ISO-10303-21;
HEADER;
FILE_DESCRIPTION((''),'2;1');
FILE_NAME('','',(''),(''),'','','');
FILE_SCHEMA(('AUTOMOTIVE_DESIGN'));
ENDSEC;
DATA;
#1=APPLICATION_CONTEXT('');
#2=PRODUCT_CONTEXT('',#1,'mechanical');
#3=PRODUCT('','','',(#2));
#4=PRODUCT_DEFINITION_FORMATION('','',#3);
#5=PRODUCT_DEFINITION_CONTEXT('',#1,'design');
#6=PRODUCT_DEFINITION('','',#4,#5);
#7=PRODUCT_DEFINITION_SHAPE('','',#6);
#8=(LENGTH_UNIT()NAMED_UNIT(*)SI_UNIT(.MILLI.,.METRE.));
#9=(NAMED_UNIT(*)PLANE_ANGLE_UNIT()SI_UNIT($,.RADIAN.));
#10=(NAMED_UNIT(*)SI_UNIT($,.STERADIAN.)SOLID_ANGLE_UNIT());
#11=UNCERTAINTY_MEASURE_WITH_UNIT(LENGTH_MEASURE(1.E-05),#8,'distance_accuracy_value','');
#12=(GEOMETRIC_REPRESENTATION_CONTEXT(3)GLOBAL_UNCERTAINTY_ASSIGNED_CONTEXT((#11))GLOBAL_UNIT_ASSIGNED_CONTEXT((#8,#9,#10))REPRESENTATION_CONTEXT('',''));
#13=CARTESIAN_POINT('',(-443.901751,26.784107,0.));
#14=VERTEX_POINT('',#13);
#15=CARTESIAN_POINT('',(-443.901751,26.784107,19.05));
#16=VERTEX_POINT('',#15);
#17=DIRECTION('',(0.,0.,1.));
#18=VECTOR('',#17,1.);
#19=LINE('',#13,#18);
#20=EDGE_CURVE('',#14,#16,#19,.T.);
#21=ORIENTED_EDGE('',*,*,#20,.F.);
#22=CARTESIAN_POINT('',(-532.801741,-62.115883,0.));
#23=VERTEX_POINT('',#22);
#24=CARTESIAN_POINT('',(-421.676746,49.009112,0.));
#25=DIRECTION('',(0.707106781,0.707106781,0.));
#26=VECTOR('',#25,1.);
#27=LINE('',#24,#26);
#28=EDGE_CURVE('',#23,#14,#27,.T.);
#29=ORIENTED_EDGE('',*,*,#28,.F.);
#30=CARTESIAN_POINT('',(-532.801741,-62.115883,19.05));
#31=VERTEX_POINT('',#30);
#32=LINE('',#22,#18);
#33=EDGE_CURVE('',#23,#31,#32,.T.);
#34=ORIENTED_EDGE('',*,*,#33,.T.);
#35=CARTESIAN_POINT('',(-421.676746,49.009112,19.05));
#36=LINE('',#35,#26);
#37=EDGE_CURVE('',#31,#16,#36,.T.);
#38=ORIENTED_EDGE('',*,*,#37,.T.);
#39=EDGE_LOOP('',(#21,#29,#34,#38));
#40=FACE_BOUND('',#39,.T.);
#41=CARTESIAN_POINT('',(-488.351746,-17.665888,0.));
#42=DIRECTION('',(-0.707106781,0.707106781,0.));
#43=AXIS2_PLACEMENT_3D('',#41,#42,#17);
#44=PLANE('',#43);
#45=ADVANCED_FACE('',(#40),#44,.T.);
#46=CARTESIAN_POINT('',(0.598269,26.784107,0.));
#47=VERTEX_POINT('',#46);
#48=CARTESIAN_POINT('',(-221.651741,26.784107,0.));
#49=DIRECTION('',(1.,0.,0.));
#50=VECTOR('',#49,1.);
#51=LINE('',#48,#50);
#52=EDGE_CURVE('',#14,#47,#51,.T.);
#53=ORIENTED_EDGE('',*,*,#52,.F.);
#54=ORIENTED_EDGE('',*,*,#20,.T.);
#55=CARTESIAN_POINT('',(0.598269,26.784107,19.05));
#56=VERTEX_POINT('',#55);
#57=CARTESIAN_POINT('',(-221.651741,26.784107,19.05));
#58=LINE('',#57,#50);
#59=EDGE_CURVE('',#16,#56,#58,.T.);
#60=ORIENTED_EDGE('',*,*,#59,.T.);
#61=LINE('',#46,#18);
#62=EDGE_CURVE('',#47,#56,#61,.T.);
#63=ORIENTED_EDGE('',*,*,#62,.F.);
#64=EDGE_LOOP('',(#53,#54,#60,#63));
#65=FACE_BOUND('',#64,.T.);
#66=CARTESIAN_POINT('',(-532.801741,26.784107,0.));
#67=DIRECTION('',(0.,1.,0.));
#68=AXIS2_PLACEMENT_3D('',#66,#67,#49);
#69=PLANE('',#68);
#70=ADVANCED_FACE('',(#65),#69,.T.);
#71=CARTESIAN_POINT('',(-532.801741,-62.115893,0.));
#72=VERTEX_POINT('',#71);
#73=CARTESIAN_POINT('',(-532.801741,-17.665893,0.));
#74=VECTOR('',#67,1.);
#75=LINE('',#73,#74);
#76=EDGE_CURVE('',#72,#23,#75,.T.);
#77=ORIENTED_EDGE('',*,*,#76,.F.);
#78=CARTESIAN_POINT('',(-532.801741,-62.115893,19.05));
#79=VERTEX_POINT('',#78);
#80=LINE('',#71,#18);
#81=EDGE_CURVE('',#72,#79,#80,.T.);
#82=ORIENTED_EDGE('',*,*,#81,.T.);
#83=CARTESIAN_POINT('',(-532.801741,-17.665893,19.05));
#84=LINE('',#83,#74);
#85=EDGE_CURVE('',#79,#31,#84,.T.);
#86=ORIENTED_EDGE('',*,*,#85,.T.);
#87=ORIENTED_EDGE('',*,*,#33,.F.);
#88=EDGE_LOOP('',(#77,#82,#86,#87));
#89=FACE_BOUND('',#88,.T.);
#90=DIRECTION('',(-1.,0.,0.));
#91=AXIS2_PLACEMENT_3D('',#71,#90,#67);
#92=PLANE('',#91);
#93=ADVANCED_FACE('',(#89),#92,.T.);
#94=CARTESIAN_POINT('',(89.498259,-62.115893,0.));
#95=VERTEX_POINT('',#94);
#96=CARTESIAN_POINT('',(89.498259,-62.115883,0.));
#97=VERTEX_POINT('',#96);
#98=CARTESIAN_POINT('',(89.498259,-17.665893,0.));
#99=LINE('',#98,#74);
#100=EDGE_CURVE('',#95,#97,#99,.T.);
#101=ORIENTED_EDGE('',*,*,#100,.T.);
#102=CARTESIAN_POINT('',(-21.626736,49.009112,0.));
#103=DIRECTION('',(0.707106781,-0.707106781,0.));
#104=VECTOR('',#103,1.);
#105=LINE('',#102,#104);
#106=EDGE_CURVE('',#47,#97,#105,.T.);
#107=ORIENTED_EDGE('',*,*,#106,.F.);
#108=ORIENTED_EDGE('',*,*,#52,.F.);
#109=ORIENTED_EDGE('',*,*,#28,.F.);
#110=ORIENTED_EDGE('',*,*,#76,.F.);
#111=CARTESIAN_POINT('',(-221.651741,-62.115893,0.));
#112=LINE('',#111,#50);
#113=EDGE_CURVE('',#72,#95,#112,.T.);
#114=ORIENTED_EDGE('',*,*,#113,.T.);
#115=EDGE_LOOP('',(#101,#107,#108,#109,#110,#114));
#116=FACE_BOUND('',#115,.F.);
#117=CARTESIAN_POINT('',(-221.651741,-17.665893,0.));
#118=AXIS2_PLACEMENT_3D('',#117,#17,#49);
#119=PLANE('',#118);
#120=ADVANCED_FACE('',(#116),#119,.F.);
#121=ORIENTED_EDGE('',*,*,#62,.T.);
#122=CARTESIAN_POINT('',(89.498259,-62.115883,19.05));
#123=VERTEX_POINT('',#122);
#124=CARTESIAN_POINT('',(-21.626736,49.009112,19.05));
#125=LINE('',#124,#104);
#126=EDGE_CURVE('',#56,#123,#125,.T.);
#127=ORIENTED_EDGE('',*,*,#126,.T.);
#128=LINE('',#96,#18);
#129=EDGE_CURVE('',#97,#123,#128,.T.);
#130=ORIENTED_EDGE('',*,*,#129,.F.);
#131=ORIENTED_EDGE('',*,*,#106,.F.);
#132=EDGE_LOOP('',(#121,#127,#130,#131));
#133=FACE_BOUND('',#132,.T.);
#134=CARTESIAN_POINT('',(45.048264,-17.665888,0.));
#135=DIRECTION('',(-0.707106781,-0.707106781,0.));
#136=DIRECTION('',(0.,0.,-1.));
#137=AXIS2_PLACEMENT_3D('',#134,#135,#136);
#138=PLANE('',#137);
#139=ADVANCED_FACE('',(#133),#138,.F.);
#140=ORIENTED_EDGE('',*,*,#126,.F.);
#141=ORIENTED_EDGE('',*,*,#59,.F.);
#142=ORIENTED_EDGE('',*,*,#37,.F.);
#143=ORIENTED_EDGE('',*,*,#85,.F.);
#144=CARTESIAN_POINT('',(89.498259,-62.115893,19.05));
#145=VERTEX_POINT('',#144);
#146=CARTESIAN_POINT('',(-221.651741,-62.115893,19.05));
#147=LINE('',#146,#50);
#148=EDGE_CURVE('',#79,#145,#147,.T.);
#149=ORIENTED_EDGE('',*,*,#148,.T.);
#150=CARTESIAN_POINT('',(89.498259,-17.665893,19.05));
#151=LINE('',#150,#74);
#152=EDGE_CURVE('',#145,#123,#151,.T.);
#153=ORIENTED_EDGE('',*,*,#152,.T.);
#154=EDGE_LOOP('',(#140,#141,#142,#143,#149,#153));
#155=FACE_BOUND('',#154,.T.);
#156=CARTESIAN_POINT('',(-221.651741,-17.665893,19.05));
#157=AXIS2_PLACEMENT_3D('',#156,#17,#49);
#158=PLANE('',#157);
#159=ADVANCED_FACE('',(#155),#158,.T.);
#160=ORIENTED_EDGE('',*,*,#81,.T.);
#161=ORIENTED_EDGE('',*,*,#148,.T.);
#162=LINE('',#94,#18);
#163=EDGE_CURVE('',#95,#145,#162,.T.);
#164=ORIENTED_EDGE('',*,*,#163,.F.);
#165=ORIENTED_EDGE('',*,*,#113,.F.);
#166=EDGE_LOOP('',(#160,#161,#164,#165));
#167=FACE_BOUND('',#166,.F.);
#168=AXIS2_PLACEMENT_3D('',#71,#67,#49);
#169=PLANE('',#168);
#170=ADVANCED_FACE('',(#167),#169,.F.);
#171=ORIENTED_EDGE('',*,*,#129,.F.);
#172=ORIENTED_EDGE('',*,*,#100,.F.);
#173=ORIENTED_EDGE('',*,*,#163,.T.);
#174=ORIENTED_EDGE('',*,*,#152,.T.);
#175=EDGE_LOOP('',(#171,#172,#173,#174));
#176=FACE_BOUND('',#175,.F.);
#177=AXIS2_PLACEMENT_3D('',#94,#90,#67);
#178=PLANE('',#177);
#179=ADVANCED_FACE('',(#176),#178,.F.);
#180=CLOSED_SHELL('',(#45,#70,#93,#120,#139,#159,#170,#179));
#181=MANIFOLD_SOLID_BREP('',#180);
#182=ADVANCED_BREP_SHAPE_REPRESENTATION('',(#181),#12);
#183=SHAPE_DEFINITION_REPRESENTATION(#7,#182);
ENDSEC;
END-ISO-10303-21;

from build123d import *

# Parameters (mm, degrees)
F0_W     = 622.3
F0_H     = 88.9
F1_DEPTH = 19.05
F2_SIZE  = 88.89999
F3_SIZE  = 88.89999


# Not quite as in the source:
# - a fillet or chamfer is up to 0.001 mm smaller than in the source, because OpenCascade refuses the exact size


with BuildPart() as f1:
    # F0 (on Top) → F1 (new body)
    with BuildSketch(Plane.XY):
        with Locations((-221.6517408729, -17.6658927679)):
            Rectangle(F0_W, F0_H)
    extrude(amount=F1_DEPTH)

    # F2 (size 88.9 in the source; OpenCascade refuses exactly that, so slightly less here)
    f2_edges = [f1.edges().sort_by_distance(p)[0] for p in [
        (-532.801741, 26.784107, 9.525),
    ]]
    chamfer(f2_edges, length=F2_SIZE)

    # F3 (size 88.9 in the source; OpenCascade refuses exactly that, so slightly less here)
    f3_edges = [f1.edges().sort_by_distance(p)[0] for p in [
        (89.498259, 26.784107, 9.525),
    ]]
    chamfer(f3_edges, length=F3_SIZE)


solid = f1.part
